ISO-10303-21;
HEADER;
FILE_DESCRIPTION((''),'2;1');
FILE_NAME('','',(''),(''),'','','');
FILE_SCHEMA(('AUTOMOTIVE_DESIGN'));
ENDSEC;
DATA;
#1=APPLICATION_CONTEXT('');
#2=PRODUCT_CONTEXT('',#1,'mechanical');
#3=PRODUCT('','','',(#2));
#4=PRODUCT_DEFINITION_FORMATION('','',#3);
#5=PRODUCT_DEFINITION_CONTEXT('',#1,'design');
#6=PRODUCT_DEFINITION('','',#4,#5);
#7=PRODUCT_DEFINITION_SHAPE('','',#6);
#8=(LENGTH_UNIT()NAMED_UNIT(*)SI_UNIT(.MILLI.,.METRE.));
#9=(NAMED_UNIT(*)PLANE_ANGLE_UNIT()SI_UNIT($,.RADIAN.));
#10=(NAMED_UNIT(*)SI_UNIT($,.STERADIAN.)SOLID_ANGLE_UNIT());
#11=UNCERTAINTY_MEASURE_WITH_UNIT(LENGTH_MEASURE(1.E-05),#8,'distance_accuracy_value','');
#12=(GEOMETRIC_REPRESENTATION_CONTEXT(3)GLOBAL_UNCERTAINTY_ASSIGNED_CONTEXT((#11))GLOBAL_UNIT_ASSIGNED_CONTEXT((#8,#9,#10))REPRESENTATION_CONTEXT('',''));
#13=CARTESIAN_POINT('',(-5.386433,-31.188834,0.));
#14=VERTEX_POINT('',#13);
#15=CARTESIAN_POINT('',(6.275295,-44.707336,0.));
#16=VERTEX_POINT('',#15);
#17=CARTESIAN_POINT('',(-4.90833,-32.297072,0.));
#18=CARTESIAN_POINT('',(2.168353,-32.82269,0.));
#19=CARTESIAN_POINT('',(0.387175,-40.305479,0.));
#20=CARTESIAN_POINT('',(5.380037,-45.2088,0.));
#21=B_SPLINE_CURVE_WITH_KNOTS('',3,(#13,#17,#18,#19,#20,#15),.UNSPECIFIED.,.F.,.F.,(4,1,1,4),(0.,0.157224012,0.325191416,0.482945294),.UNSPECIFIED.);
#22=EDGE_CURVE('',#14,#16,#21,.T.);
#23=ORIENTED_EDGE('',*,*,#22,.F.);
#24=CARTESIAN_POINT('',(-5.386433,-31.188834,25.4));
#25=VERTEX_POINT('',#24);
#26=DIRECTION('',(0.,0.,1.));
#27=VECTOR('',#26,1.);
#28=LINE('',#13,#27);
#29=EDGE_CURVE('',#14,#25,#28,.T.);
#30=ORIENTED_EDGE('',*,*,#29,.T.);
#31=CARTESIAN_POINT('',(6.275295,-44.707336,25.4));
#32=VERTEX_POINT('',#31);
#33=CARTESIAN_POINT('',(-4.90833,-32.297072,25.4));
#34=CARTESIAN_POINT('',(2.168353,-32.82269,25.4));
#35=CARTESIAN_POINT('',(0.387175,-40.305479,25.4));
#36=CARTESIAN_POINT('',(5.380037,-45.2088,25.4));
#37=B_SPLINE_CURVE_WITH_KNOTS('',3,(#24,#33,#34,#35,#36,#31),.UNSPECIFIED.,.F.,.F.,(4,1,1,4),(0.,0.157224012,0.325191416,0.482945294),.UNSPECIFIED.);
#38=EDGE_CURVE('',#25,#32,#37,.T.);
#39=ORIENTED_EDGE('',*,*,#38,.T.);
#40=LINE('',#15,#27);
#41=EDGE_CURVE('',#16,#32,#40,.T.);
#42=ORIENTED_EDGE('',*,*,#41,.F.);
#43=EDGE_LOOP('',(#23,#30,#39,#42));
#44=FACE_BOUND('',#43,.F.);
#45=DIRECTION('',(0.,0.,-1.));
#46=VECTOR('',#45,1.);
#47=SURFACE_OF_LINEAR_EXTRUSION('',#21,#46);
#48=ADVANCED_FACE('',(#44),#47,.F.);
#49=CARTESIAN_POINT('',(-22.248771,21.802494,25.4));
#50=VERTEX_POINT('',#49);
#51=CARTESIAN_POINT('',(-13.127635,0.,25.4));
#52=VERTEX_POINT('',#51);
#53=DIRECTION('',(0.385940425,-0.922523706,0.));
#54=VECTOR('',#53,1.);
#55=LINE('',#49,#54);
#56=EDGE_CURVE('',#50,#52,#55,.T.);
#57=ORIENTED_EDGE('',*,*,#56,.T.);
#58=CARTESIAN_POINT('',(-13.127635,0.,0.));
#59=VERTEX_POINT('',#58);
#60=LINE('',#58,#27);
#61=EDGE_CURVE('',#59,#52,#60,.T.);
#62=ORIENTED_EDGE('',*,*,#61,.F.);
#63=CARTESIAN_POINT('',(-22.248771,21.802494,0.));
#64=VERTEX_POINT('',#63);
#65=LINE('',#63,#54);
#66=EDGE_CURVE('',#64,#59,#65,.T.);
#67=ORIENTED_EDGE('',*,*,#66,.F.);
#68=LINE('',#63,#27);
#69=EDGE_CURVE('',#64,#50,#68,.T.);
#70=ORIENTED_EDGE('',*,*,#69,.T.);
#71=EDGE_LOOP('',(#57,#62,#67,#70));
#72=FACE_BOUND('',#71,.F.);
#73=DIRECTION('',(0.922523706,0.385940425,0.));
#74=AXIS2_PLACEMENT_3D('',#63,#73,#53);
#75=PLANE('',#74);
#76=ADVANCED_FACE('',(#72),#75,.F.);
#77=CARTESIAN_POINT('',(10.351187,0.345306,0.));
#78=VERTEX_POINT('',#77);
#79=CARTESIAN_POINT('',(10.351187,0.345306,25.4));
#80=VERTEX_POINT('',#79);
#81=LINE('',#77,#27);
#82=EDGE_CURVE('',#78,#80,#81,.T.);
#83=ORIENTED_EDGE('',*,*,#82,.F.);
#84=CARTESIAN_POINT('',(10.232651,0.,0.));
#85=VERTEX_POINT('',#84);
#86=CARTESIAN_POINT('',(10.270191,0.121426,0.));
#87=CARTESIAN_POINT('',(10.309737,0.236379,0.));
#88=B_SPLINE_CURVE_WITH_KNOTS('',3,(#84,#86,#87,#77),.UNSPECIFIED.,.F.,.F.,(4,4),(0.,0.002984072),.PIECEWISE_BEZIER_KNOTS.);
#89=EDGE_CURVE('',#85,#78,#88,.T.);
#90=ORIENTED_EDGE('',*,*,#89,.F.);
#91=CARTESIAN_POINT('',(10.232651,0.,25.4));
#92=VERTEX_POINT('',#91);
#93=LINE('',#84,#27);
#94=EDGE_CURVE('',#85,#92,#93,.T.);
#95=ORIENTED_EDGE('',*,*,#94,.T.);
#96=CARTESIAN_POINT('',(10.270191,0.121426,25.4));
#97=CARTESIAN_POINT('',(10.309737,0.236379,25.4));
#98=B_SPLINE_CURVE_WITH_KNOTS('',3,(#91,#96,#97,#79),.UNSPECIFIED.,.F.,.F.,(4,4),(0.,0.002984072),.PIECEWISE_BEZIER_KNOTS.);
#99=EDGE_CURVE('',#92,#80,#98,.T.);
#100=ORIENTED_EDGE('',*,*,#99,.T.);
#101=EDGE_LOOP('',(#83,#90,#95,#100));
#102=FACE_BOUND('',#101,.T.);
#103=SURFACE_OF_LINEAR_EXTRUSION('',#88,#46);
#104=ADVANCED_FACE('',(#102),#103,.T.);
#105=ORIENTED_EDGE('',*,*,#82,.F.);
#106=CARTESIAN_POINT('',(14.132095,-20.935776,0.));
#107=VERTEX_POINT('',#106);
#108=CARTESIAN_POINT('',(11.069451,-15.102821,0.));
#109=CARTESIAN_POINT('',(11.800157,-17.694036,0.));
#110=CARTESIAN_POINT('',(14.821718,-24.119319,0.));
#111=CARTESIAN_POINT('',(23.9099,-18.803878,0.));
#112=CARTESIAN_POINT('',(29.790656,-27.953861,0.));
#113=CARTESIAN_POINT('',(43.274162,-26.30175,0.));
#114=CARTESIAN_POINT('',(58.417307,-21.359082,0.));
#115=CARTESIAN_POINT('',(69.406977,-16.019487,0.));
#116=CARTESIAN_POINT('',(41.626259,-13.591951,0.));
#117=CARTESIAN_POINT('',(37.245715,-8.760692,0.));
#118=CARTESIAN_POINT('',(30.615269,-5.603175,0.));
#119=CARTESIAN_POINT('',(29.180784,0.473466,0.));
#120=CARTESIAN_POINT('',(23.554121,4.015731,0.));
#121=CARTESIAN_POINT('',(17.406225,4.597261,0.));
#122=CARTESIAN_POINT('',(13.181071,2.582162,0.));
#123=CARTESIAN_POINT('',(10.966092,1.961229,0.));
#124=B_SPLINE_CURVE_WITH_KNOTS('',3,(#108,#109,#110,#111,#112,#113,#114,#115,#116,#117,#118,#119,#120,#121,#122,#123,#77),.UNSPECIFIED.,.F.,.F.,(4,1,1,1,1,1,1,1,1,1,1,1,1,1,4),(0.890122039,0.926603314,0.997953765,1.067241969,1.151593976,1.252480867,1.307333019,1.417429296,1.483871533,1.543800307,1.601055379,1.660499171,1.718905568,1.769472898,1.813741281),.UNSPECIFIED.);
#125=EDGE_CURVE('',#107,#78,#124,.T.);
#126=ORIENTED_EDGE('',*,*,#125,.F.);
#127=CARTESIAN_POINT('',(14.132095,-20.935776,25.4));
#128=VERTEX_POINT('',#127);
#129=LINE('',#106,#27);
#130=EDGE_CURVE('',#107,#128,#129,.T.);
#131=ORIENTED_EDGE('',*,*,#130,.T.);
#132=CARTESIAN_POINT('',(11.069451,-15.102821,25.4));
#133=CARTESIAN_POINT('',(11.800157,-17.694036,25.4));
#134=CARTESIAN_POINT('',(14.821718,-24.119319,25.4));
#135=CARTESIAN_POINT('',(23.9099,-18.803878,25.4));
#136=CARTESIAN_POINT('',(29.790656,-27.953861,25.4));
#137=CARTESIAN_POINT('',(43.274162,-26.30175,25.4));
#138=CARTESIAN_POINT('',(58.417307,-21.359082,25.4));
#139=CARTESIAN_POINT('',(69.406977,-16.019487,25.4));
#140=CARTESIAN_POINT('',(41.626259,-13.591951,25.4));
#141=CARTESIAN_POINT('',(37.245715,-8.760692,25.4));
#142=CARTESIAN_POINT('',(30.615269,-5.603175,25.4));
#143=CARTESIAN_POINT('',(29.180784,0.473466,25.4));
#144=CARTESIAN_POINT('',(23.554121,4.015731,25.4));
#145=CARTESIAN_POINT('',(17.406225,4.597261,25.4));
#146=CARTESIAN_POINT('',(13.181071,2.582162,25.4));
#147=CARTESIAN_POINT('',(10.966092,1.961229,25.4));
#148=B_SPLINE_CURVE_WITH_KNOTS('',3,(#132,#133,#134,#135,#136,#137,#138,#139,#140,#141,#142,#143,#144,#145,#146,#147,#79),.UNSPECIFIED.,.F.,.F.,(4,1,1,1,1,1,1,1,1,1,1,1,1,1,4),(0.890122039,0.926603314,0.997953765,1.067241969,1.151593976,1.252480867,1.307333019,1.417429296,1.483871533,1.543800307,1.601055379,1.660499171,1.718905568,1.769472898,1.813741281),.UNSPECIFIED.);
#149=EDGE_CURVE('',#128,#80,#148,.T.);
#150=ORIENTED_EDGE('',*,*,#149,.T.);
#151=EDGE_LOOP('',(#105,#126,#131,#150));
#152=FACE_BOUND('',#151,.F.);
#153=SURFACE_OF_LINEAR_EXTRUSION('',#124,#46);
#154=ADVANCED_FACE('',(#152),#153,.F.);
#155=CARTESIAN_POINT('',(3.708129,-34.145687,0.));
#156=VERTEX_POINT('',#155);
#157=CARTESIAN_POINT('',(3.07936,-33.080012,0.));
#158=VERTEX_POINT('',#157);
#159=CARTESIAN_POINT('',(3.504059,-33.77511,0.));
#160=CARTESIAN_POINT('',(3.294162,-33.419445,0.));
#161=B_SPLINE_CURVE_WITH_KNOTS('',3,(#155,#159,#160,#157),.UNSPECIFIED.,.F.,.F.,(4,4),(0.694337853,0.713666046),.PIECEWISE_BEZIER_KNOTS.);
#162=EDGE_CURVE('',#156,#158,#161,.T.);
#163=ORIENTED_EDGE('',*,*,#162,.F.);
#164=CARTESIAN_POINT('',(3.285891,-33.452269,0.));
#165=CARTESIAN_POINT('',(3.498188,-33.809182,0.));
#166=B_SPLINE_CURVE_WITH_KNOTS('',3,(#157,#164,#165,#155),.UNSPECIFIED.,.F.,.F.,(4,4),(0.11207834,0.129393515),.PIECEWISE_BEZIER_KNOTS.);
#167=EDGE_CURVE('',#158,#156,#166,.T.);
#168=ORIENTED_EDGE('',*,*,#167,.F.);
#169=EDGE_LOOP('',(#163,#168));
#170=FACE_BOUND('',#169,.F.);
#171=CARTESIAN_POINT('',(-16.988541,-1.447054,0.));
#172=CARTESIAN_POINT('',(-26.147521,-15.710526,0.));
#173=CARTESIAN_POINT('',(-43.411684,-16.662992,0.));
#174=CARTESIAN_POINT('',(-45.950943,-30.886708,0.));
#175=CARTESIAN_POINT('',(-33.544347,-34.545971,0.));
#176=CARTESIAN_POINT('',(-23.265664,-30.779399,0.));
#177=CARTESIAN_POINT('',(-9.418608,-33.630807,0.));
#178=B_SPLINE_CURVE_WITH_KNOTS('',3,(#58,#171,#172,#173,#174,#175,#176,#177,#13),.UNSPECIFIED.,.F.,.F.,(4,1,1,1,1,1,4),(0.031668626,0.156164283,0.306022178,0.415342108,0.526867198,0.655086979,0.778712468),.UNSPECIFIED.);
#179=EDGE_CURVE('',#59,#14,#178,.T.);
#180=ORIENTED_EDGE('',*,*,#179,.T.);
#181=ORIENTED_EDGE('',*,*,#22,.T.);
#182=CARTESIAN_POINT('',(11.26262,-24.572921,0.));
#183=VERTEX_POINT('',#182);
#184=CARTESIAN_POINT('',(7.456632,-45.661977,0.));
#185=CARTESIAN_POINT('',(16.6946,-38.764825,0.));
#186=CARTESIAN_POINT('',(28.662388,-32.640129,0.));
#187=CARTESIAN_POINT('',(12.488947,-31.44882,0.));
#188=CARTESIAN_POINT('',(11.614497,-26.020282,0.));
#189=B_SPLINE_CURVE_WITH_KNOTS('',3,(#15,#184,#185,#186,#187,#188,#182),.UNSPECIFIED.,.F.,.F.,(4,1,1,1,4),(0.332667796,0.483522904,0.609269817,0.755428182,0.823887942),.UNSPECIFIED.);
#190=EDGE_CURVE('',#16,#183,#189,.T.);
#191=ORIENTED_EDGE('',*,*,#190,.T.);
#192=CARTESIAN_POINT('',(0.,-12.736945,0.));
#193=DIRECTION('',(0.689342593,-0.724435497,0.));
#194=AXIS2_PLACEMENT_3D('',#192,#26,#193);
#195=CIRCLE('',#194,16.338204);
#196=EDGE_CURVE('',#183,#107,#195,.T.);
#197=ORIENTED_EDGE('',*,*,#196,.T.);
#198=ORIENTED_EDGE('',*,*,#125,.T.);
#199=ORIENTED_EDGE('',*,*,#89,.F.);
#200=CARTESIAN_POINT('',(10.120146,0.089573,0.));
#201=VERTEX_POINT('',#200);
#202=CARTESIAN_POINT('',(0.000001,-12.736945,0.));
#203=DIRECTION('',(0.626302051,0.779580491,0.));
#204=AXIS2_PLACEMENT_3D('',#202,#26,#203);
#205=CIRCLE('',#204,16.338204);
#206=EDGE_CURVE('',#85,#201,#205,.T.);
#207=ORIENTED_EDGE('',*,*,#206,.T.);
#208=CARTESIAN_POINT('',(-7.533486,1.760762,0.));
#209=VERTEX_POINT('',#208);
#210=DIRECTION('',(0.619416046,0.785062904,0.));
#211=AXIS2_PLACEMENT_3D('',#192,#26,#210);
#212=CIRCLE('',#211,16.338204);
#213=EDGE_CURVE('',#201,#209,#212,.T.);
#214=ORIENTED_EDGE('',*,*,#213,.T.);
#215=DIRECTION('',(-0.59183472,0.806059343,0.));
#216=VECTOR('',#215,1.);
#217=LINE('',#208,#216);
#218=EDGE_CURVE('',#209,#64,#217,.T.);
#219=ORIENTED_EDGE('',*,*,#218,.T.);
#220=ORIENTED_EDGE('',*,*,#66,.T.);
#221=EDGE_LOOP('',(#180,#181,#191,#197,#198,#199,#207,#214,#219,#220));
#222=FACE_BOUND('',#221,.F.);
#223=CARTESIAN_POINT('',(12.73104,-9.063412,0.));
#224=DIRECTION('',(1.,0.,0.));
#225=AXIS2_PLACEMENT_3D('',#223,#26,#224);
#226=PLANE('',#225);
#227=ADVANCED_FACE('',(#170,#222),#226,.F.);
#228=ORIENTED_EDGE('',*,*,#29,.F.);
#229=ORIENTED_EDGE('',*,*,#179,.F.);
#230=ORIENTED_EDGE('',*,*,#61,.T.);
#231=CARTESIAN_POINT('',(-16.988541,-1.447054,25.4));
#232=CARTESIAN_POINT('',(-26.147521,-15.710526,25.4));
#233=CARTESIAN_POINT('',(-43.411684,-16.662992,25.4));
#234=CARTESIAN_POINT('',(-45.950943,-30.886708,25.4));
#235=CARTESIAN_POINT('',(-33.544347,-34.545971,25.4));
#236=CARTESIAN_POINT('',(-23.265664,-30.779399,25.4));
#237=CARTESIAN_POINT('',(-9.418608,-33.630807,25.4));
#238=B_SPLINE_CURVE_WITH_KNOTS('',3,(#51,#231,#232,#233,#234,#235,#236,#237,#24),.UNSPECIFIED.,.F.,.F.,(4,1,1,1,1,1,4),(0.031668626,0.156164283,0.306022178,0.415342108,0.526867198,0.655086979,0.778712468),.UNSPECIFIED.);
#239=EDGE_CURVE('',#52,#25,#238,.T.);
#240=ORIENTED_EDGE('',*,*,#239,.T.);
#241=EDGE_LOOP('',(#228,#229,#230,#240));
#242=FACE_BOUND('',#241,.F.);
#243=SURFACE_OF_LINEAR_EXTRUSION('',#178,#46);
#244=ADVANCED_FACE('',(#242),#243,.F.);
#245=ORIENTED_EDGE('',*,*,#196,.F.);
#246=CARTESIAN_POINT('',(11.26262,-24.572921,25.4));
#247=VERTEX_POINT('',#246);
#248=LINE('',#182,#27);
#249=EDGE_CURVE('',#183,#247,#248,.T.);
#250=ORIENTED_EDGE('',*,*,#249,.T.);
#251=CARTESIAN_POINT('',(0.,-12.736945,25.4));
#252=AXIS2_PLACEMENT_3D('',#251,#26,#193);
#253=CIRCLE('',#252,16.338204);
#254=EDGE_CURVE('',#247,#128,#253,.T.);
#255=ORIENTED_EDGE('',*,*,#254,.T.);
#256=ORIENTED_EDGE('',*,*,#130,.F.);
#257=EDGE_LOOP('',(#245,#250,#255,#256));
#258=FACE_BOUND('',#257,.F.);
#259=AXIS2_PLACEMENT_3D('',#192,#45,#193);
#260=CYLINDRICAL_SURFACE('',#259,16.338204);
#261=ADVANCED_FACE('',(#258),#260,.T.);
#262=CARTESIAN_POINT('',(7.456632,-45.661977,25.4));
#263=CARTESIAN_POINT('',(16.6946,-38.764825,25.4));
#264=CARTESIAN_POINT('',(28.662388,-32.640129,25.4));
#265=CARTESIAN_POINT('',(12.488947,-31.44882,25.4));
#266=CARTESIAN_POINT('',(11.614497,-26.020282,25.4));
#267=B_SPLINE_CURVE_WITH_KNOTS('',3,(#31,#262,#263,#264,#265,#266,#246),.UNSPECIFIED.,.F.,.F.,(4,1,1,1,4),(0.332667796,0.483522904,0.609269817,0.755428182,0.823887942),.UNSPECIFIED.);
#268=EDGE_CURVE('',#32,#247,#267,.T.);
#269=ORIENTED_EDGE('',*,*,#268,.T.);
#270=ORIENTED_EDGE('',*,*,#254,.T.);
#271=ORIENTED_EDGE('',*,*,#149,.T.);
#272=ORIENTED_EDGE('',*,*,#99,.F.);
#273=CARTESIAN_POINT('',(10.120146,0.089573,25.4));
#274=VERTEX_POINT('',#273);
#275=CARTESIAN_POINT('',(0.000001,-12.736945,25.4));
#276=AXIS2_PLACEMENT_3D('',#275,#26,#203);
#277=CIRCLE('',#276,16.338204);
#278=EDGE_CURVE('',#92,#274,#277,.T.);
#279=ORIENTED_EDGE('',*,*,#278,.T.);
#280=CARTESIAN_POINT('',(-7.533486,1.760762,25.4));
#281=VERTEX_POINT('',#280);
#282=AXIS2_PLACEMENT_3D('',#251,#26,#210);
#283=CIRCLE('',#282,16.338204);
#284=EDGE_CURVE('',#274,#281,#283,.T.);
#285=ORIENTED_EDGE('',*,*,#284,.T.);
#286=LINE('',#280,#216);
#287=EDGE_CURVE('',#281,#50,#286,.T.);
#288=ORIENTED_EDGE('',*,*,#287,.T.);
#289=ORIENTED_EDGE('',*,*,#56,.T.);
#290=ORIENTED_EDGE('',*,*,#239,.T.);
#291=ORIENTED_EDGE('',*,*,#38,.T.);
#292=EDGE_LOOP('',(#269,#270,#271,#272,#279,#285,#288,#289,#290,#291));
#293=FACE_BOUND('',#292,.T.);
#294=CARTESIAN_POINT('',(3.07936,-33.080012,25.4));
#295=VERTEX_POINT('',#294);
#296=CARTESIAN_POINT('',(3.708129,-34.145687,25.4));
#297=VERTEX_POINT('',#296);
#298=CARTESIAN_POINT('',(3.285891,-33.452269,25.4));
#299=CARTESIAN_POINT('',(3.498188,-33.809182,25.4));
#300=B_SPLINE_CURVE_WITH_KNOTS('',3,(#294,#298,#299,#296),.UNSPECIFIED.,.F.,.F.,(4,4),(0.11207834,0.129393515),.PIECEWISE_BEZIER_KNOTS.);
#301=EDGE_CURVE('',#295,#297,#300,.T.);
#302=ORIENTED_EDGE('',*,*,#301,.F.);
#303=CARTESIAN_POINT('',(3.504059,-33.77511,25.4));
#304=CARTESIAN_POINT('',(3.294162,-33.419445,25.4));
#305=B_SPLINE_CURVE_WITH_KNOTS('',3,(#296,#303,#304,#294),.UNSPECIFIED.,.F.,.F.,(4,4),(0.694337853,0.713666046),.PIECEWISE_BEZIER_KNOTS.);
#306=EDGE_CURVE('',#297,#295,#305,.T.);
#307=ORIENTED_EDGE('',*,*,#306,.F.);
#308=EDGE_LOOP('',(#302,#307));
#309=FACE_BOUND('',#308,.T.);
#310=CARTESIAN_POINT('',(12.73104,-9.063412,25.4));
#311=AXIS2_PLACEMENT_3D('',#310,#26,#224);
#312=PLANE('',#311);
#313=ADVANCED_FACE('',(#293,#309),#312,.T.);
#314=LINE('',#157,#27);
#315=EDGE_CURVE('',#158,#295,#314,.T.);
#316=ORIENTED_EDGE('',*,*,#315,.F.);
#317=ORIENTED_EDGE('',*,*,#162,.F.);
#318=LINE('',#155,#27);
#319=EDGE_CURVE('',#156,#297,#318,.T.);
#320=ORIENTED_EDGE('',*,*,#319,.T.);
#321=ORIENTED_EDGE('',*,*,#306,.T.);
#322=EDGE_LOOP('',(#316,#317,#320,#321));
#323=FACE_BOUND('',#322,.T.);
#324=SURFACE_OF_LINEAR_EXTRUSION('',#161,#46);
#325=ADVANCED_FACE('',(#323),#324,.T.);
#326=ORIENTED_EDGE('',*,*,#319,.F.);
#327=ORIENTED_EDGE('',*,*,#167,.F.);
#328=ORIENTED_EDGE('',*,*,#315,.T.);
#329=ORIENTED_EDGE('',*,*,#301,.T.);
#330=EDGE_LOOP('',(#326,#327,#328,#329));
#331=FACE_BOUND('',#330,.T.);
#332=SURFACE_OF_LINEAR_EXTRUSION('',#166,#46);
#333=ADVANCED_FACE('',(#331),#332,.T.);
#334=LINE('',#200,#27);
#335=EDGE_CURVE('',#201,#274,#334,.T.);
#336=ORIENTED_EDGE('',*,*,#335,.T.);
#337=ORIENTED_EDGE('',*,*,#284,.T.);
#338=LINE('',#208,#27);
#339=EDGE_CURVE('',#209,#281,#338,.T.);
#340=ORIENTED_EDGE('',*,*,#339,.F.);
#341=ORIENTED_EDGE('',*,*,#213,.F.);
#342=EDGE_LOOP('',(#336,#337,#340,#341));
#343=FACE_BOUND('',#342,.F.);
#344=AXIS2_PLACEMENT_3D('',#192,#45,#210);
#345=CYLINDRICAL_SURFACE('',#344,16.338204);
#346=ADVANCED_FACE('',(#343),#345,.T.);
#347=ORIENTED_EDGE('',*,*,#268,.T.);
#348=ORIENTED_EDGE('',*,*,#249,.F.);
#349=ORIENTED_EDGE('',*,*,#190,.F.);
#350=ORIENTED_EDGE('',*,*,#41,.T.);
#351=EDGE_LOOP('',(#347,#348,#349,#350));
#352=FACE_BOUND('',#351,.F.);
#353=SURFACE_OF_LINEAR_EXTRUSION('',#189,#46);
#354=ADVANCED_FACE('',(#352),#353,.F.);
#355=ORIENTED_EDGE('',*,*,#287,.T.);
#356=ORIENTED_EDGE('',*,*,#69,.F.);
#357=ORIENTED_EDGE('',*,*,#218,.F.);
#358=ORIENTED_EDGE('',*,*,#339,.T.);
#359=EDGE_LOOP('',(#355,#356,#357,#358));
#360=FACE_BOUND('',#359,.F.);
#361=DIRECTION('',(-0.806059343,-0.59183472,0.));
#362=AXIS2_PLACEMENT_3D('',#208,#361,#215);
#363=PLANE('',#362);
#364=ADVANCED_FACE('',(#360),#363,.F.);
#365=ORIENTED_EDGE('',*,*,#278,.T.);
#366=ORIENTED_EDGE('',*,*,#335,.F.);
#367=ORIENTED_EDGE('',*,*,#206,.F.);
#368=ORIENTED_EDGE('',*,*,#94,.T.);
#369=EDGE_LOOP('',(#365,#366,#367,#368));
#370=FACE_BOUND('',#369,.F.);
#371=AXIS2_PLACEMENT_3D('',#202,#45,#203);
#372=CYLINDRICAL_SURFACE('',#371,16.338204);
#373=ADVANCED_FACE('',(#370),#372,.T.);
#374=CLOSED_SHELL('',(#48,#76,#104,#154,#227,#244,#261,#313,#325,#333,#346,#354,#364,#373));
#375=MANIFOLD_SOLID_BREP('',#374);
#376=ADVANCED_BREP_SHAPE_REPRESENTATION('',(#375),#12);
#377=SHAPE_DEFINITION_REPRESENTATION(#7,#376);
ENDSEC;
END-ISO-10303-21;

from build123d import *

# Parameters (mm, degrees)
F1_DEPTH = 25.4


with BuildPart() as f1:
    # F0 (on Top) → F1 (new body)
    with BuildSketch(Plane.XY):
        with BuildLine():
            ThreePointArc((15.6247597688, -17.5122784292), (16.158858904, -15.1511123847), (16.3382044071, -12.7369454131))
            ThreePointArc((16.3382044071, -12.7369454131), (14.732957367, -5.6745881247), (10.2326509171, 0))
            add(Edge.make_bspline(
                [(11.0694508842, -15.1028212661), (9.5993425881, -9.8895547332), (9.3093062782, -2.986619819), (10.2326509171, 0)],
                knots=[0.9266033138, 0.9266033138, 0.9266033138, 0.9266033138, 1, 1, 1, 1], degree=3))
            ThreePointArc((11.0694508842, -15.1028212661), (13.2014186834, -16.5829843604), (15.6247597688, -17.5122784292))
        make_face()
        with BuildLine():
            ThreePointArc((10.2326509171, 0), (14.732957367, -5.6745881247), (16.3382044071, -12.7369454131))
            ThreePointArc((16.3382044071, -12.7369454131), (16.158858904, -15.1511123847), (15.6247597688, -17.5122784292))
            ThreePointArc((15.6247597688, -17.5122784292), (24.9039357291, -15.5507675945), (29.064724865, -7.0279473439))
            ThreePointArc((29.064724865, -7.0279473439), (22.2178667073, 3.0289081499), (10.3511869131, 0.3453061453))
            add(Edge.make_bspline(
                [(10.2326509171, 0), (10.2701911189, 0.1214262863), (10.3097370055, 0.2363790128), (10.3511869131, 0.3453061453)],
                knots=[0, 0, 0, 0, 0.0029840715, 0.0029840715, 0.0029840715, 0.0029840715], degree=3))
        make_face()
        with BuildLine():
            add(Edge.make_bspline(
                [(11.0694508842, -15.1028212661), (9.5993425881, -9.8895547332), (9.3093062782, -2.986619819), (10.2326509171, 0)],
                knots=[0.9266033138, 0.9266033138, 0.9266033138, 0.9266033138, 1, 1, 1, 1], degree=3))
            ThreePointArc((10.2326509171, 0), (10.1764969932, 0.0449101719), (10.1201459651, 0.0895727775))
            ThreePointArc((10.1201459651, 0.0895727775), (7.4671185374, -7.7020590055), (11.0694508842, -15.1028212661))
        make_face()
        with BuildLine():
            ThreePointArc((29.064724865, -7.0279473439), (24.9039357291, -15.5507675945), (15.6247597688, -17.5122784292))
            ThreePointArc((15.6247597688, -17.5122784292), (14.97657106, -19.2668185001), (14.1320946898, -20.9357759959))
            add(Edge.make_bspline(
                [(10.3511869131, 0.3453061453), (10.9660918821, 1.9612285661), (13.1810710321, 2.5821615076), (17.4062250817, 4.5972614145), (23.5541211341, 4.0157306024), (29.1807841604, 0.4734658783), (30.6152690832, -5.6031749227), (37.2457146084, -8.7606918958), (41.6262591245, -13.5919512406), (69.4069767494, -16.0194865708), (58.4173073455, -21.3590816503), (43.2741615609, -26.3017495114), (29.7906561882, -27.9538614081), (23.9099000961, -18.8038777974), (16.6936052342, -23.0245011534), (14.1320946898, -20.9357759959)],
                knots=[0.0029840715, 0.0029840715, 0.0029840715, 0.0029840715, 0.0472524544, 0.0978197845, 0.156226181, 0.2156699733, 0.2729250454, 0.3328538195, 0.399296056, 0.5093923331, 0.5642444856, 0.6651313762, 0.7494833831, 0.8187715875, 0.8901220386, 0.8901220386, 0.8901220386, 0.8901220386], degree=3))
            ThreePointArc((10.3511869131, 0.3453061453), (22.2178667073, 3.0289081499), (29.064724865, -7.0279473439))
        make_face()
        with BuildLine():
            ThreePointArc((14.1320946898, -20.9357759959), (14.97657106, -19.2668185001), (15.6247597688, -17.5122784292))
            ThreePointArc((15.6247597688, -17.5122784292), (13.2014186834, -16.5829843604), (11.0694508842, -15.1028212661))
            add(Edge.make_bspline(
                [(14.1320946898, -20.9357759959), (12.8224019033, -19.8678169833), (11.8001572435, -17.6940364971), (11.0694508842, -15.1028212661)],
                knots=[0.8901220386, 0.8901220386, 0.8901220386, 0.8901220386, 0.9266033138, 0.9266033138, 0.9266033138, 0.9266033138], degree=3))
        make_face()
        with BuildLine():
            ThreePointArc((11.0694508842, -15.1028212661), (7.4671185374, -7.7020590055), (10.1201459651, 0.0895727775))
            ThreePointArc((10.1201459651, 0.0895727775), (1.5397794917, 3.5285395894), (-7.5334858124, 1.7607618112))
            ThreePointArc((-7.5334858124, 1.7607618112), (-8.9265880443, 0.947094529), (-10.2326509171, 0))
            add(Edge.make_bspline(
                [(-3.0699548582, -28.7841352111), (0.8240097012, -21.7530635718), (-4.4613062913, -2.497334585), (-10.2326509171, 0)],
                knots=[0.8075795969, 0.8075795969, 0.8075795969, 0.8075795969, 1, 1, 1, 1], degree=3))
            add(Edge.make_bspline(
                [(-1.0373402516, -29.0421853208), (-1.7263886536, -28.7488598338), (-2.411144298, -28.652496149), (-3.0699548582, -28.7841352111)],
                knots=[0.8274826523, 0.8274826523, 0.8274826523, 0.8274826523, 0.8828352089, 0.8828352089, 0.8828352089, 0.8828352089], degree=3))
            ThreePointArc((-1.0373402516, -29.0421853208), (0.2330522052, -29.0734875783), (1.5020347762, -29.0059593591))
            add(Edge.make_bspline(
                [(1.9966859836, -25.2967402339), (1.3467949947, -26.4147374297), (1.2639465735, -27.7023037912), (1.5020347762, -29.0059593591)],
                knots=[0, 0, 0, 0, 0.0539789023, 0.0539789023, 0.0539789023, 0.0539789023], degree=3))
            add(Edge.make_bspline(
                [(11.2626201962, -24.5729206396), (11.0063895855, -23.5189771031), (9.9645541492, -20.328136721), (3.5168312901, -22.6816582912), (1.9966859836, -25.2967402339)],
                knots=[0.8238879416, 0.8238879416, 0.8238879416, 0.8238879416, 0.873739171, 1, 1, 1, 1], degree=3))
            ThreePointArc((11.2626201962, -24.5729206396), (12.8269283667, -22.8565714892), (14.1320946898, -20.9357759959))
            add(Edge.make_bspline(
                [(14.1320946898, -20.9357759959), (12.8224019033, -19.8678169833), (11.8001572435, -17.6940364971), (11.0694508842, -15.1028212661)],
                knots=[0.8901220386, 0.8901220386, 0.8901220386, 0.8901220386, 0.9266033138, 0.9266033138, 0.9266033138, 0.9266033138], degree=3))
        make_face()
        with BuildLine():
            ThreePointArc((-10.2326509171, 0), (-8.9265880443, 0.947094529), (-7.5334858124, 1.7607618112))
            Line((-7.5334858124, 1.7607618112), (-22.2487710416, 21.8024943024))
            Line((-22.2487710416, 21.8024943024), (-13.127635327, 0))
            add(Edge.make_bspline(
                [(-10.2326509171, 0), (-11.1825010918, 0.4110123109), (-12.1455161813, 0.368094916), (-13.127635327, 0)],
                knots=[0, 0, 0, 0, 0.0316686258, 0.0316686258, 0.0316686258, 0.0316686258], degree=3))
        make_face()
        with BuildLine():
            add(Edge.make_bspline(
                [(6.2752948143, -44.7073355317), (7.4566317865, -45.6619770197), (16.6946003339, -38.7648248858), (28.6623877442, -32.6401294165), (12.4889474561, -31.4488202018), (11.6144968935, -26.0202815526), (11.2626201962, -24.5729206396)],
                knots=[0.3326677956, 0.3326677956, 0.3326677956, 0.3326677956, 0.483522904, 0.6092698166, 0.7554281822, 0.8238879416, 0.8238879416, 0.8238879416, 0.8238879416], degree=3))
            ThreePointArc((11.2626201962, -24.5729206396), (6.756260964, -27.6127600473), (1.5020347762, -29.0059593591))
            add(Edge.make_bspline(
                [(1.5020347762, -29.0059593591), (1.7582976885, -30.409130826), (2.3863654431, -31.8309416267), (3.0793600463, -33.0800123041)],
                knots=[0.0539789023, 0.0539789023, 0.0539789023, 0.0539789023, 0.1120783401, 0.1120783401, 0.1120783401, 0.1120783401], degree=3))
            add(Edge.make_bspline(
                [(3.7081294957, -34.1456867388), (3.5040593333, -33.7751099484), (3.2941622239, -33.4194445981), (3.0793600283, -33.0800122747)],
                knots=[0.6943378528, 0.6943378528, 0.6943378528, 0.6943378528, 0.7136660465, 0.7136660465, 0.7136660465, 0.7136660465], degree=3))
            add(Edge.make_bspline(
                [(3.7081294937, -34.1456867399), (4.9882228558, -36.1974885553), (6.3669138471, -37.6924416259), (6.2780647625, -40.2375798495), (6.2515850068, -40.5877476318)],
                knots=[0.1293935148, 0.1293935148, 0.1293935148, 0.1293935148, 0.2349709338, 0.2514569097, 0.2514569097, 0.2514569097, 0.2514569097], degree=3))
            add(Edge.make_bspline(
                [(6.2752948143, -44.7073355317), (6.8854909927, -44.3655439077), (6.7882111753, -42.687560365), (6.2515850082, -40.5877476332)],
                knots=[0.482945294, 0.482945294, 0.482945294, 0.482945294, 0.590468255, 0.590468255, 0.590468255, 0.590468255], degree=3))
        make_face()
        with BuildLine():
            ThreePointArc((1.5020347762, -29.0059593591), (6.756260964, -27.6127600473), (11.2626201962, -24.5729206396))
            add(Edge.make_bspline(
                [(11.2626201962, -24.5729206396), (11.0063895855, -23.5189771031), (9.9645541492, -20.328136721), (3.5168312901, -22.6816582912), (1.9966859836, -25.2967402339)],
                knots=[0.8238879416, 0.8238879416, 0.8238879416, 0.8238879416, 0.873739171, 1, 1, 1, 1], degree=3))
            add(Edge.make_bspline(
                [(1.9966859836, -25.2967402339), (1.3467949947, -26.4147374297), (1.2639465735, -27.7023037912), (1.5020347762, -29.0059593591)],
                knots=[0, 0, 0, 0, 0.0539789023, 0.0539789023, 0.0539789023, 0.0539789023], degree=3))
        make_face()
        with BuildLine():
            add(Edge.make_bspline(
                [(-3.0699548582, -28.7841352111), (0.8240097012, -21.7530635718), (-4.4613062913, -2.497334585), (-10.2326509171, 0)],
                knots=[0.8075795969, 0.8075795969, 0.8075795969, 0.8075795969, 1, 1, 1, 1], degree=3))
            ThreePointArc((-10.2326509171, 0), (-14.5067813584, -5.2209479499), (-16.3067587039, -11.7237604245))
            ThreePointArc((-16.3067587039, -11.7237604245), (-9.7227081214, -13.4309985411), (-6.8315372381, -19.5877440274))
            ThreePointArc((-6.8315372381, -19.5877440274), (-7.6120209178, -23.0344974741), (-9.8012018612, -25.808799349))
            ThreePointArc((-9.8012018612, -25.808799349), (-6.6052876316, -27.6804088185), (-3.0699548582, -28.7841352111))
        make_face()
        with BuildLine():
            ThreePointArc((-16.3067587039, -11.7237604245), (-14.5067813584, -5.2209479499), (-10.2326509171, 0))
            add(Edge.make_bspline(
                [(-10.2326509171, 0), (-11.1825010918, 0.4110123109), (-12.1455161813, 0.368094916), (-13.127635327, 0)],
                knots=[0, 0, 0, 0, 0.0316686258, 0.0316686258, 0.0316686258, 0.0316686258], degree=3))
            add(Edge.make_bspline(
                [(-13.127635327, 0), (-16.9885407298, -1.4470542155), (-26.1475214336, -15.710526233), (-43.4116839601, -16.662992314), (-45.950942929, -30.8867076179), (-33.5443465173, -34.5459712582), (-23.2656635988, -30.7793989739), (-9.4186082957, -33.630807497), (-5.3864327744, -31.188833942)],
                knots=[0.0316686258, 0.0316686258, 0.0316686258, 0.0316686258, 0.1561642831, 0.3060221782, 0.4153421079, 0.5268671977, 0.655086979, 0.7787124677, 0.7787124677, 0.7787124677, 0.7787124677], degree=3))
            add(Edge.make_bspline(
                [(-3.0699548582, -28.7841352111), (-4.4644595819, -29.062775696), (-5.7427193917, -30.362964597), (-5.3864327744, -31.188833942)],
                knots=[0.8828352089, 0.8828352089, 0.8828352089, 0.8828352089, 1, 1, 1, 1], degree=3))
            ThreePointArc((-3.0699548582, -28.7841352111), (-6.6052876316, -27.6804088185), (-9.8012018612, -25.808799349))
            ThreePointArc((-9.8012018612, -25.808799349), (-22.0961404136, -22.9426465286), (-16.3067587039, -11.7237604245))
        make_face()
        with BuildLine():
            add(Edge.make_bspline(
                [(1.5020347762, -29.0059593591), (1.7582976885, -30.409130826), (2.3863654431, -31.8309416267), (3.0793600463, -33.0800123041)],
                knots=[0.0539789023, 0.0539789023, 0.0539789023, 0.0539789023, 0.1120783401, 0.1120783401, 0.1120783401, 0.1120783401], degree=3))
            ThreePointArc((1.5020347762, -29.0059593591), (0.2330522052, -29.0734875783), (-1.0373402516, -29.0421853208))
            add(Edge.make_bspline(
                [(3.0793600463, -33.0800123041), (1.8144691163, -31.0812204976), (0.3794895238, -29.6453247849), (-1.0373402516, -29.0421853208)],
                knots=[0.7136660465, 0.7136660465, 0.7136660465, 0.7136660465, 0.8274826523, 0.8274826523, 0.8274826523, 0.8274826523], degree=3))
        make_face()
        with BuildLine():
            add(Edge.make_bspline(
                [(-5.3864327744, -31.188833942), (-4.908330002, -32.2970720971), (2.1683533748, -32.8226904652), (0.3871749857, -40.3054793101), (5.3800366063, -45.2088000896), (6.2752948143, -44.7073355317)],
                knots=[0, 0, 0, 0, 0.1572240121, 0.3251914161, 0.482945294, 0.482945294, 0.482945294, 0.482945294], degree=3))
            add(Edge.make_bspline(
                [(6.2515850082, -40.5877476332), (6.1211441743, -42.3126947019), (5.6393374171, -44.1934167006), (6.2752948143, -44.7073355317)],
                knots=[0.2514569097, 0.2514569097, 0.2514569097, 0.2514569097, 0.3326677956, 0.3326677956, 0.3326677956, 0.3326677956], degree=3))
            add(Edge.make_bspline(
                [(6.2515850082, -40.5877476332), (5.7331920658, -38.5592813245), (4.8048013486, -36.1371642314), (3.7081294957, -34.1456867388)],
                knots=[0.590468255, 0.590468255, 0.590468255, 0.590468255, 0.6943378528, 0.6943378528, 0.6943378528, 0.6943378528], degree=3))
            add(Edge.make_bspline(
                [(3.0793600463, -33.0800123041), (3.2858908332, -33.4522685219), (3.4981884, -33.8091819739), (3.7081294937, -34.1456867399)],
                knots=[0.1120783401, 0.1120783401, 0.1120783401, 0.1120783401, 0.1293935148, 0.1293935148, 0.1293935148, 0.1293935148], degree=3))
            add(Edge.make_bspline(
                [(3.0793600463, -33.0800123041), (1.8144691163, -31.0812204976), (0.3794895238, -29.6453247849), (-1.0373402516, -29.0421853208)],
                knots=[0.7136660465, 0.7136660465, 0.7136660465, 0.7136660465, 0.8274826523, 0.8274826523, 0.8274826523, 0.8274826523], degree=3))
            ThreePointArc((-1.0373402516, -29.0421853208), (-2.0576967086, -28.9450547261), (-3.0699548582, -28.7841352111))
            add(Edge.make_bspline(
                [(-5.3864327744, -31.188833942), (-4.4449009501, -30.618621707), (-3.6541318811, -29.838944631), (-3.0699548582, -28.7841352111)],
                knots=[0.7787124677, 0.7787124677, 0.7787124677, 0.7787124677, 0.8075795969, 0.8075795969, 0.8075795969, 0.8075795969], degree=3))
        make_face()
        with BuildLine():
            add(Edge.make_bspline(
                [(6.2515850082, -40.5877476332), (6.1211441743, -42.3126947019), (5.6393374171, -44.1934167006), (6.2752948143, -44.7073355317)],
                knots=[0.2514569097, 0.2514569097, 0.2514569097, 0.2514569097, 0.3326677956, 0.3326677956, 0.3326677956, 0.3326677956], degree=3))
            add(Edge.make_bspline(
                [(6.2752948143, -44.7073355317), (6.8854909927, -44.3655439077), (6.7882111753, -42.687560365), (6.2515850082, -40.5877476332)],
                knots=[0.482945294, 0.482945294, 0.482945294, 0.482945294, 0.590468255, 0.590468255, 0.590468255, 0.590468255], degree=3))
        make_face()
        with BuildLine():
            ThreePointArc((-6.8315372381, -19.5877440274), (-9.7227081214, -13.4309985411), (-16.3067587039, -11.7237604245))
            ThreePointArc((-16.3067587039, -11.7237604245), (-14.8325143382, -19.5877440274), (-9.8012018612, -25.808799349))
            ThreePointArc((-9.8012018612, -25.808799349), (-7.6120209178, -23.0344974741), (-6.8315372381, -19.5877440274))
        make_face()
        with BuildLine():
            ThreePointArc((-9.8012018612, -25.808799349), (-14.8325143382, -19.5877440274), (-16.3067587039, -11.7237604245))
            ThreePointArc((-16.3067587039, -11.7237604245), (-22.0961404136, -22.9426465286), (-9.8012018612, -25.808799349))
        make_face()
        with BuildLine():
            add(Edge.make_bspline(
                [(-1.0373402516, -29.0421853208), (-1.7263886536, -28.7488598338), (-2.411144298, -28.652496149), (-3.0699548582, -28.7841352111)],
                knots=[0.8274826523, 0.8274826523, 0.8274826523, 0.8274826523, 0.8828352089, 0.8828352089, 0.8828352089, 0.8828352089], degree=3))
            ThreePointArc((-3.0699548582, -28.7841352111), (-2.0576967086, -28.9450547261), (-1.0373402516, -29.0421853208))
        make_face()
        with BuildLine():
            add(Edge.make_bspline(
                [(-5.3864327744, -31.188833942), (-4.4449009501, -30.618621707), (-3.6541318811, -29.838944631), (-3.0699548582, -28.7841352111)],
                knots=[0.7787124677, 0.7787124677, 0.7787124677, 0.7787124677, 0.8075795969, 0.8075795969, 0.8075795969, 0.8075795969], degree=3))
            add(Edge.make_bspline(
                [(-3.0699548582, -28.7841352111), (-4.4644595819, -29.062775696), (-5.7427193917, -30.362964597), (-5.3864327744, -31.188833942)],
                knots=[0.8828352089, 0.8828352089, 0.8828352089, 0.8828352089, 1, 1, 1, 1], degree=3))
        make_face()
        with BuildLine():
            add(Edge.make_bspline(
                [(6.2515850082, -40.5877476332), (5.7331920658, -38.5592813245), (4.8048013486, -36.1371642314), (3.7081294957, -34.1456867388)],
                knots=[0.590468255, 0.590468255, 0.590468255, 0.590468255, 0.6943378528, 0.6943378528, 0.6943378528, 0.6943378528], degree=3))
            add(Edge.make_bspline(
                [(3.7081294937, -34.1456867399), (4.9882228558, -36.1974885553), (6.3669138471, -37.6924416259), (6.2780647625, -40.2375798495), (6.2515850068, -40.5877476318)],
                knots=[0.1293935148, 0.1293935148, 0.1293935148, 0.1293935148, 0.2349709338, 0.2514569097, 0.2514569097, 0.2514569097, 0.2514569097], degree=3))
        make_face()
    extrude(amount=F1_DEPTH)


solid = f1.part
